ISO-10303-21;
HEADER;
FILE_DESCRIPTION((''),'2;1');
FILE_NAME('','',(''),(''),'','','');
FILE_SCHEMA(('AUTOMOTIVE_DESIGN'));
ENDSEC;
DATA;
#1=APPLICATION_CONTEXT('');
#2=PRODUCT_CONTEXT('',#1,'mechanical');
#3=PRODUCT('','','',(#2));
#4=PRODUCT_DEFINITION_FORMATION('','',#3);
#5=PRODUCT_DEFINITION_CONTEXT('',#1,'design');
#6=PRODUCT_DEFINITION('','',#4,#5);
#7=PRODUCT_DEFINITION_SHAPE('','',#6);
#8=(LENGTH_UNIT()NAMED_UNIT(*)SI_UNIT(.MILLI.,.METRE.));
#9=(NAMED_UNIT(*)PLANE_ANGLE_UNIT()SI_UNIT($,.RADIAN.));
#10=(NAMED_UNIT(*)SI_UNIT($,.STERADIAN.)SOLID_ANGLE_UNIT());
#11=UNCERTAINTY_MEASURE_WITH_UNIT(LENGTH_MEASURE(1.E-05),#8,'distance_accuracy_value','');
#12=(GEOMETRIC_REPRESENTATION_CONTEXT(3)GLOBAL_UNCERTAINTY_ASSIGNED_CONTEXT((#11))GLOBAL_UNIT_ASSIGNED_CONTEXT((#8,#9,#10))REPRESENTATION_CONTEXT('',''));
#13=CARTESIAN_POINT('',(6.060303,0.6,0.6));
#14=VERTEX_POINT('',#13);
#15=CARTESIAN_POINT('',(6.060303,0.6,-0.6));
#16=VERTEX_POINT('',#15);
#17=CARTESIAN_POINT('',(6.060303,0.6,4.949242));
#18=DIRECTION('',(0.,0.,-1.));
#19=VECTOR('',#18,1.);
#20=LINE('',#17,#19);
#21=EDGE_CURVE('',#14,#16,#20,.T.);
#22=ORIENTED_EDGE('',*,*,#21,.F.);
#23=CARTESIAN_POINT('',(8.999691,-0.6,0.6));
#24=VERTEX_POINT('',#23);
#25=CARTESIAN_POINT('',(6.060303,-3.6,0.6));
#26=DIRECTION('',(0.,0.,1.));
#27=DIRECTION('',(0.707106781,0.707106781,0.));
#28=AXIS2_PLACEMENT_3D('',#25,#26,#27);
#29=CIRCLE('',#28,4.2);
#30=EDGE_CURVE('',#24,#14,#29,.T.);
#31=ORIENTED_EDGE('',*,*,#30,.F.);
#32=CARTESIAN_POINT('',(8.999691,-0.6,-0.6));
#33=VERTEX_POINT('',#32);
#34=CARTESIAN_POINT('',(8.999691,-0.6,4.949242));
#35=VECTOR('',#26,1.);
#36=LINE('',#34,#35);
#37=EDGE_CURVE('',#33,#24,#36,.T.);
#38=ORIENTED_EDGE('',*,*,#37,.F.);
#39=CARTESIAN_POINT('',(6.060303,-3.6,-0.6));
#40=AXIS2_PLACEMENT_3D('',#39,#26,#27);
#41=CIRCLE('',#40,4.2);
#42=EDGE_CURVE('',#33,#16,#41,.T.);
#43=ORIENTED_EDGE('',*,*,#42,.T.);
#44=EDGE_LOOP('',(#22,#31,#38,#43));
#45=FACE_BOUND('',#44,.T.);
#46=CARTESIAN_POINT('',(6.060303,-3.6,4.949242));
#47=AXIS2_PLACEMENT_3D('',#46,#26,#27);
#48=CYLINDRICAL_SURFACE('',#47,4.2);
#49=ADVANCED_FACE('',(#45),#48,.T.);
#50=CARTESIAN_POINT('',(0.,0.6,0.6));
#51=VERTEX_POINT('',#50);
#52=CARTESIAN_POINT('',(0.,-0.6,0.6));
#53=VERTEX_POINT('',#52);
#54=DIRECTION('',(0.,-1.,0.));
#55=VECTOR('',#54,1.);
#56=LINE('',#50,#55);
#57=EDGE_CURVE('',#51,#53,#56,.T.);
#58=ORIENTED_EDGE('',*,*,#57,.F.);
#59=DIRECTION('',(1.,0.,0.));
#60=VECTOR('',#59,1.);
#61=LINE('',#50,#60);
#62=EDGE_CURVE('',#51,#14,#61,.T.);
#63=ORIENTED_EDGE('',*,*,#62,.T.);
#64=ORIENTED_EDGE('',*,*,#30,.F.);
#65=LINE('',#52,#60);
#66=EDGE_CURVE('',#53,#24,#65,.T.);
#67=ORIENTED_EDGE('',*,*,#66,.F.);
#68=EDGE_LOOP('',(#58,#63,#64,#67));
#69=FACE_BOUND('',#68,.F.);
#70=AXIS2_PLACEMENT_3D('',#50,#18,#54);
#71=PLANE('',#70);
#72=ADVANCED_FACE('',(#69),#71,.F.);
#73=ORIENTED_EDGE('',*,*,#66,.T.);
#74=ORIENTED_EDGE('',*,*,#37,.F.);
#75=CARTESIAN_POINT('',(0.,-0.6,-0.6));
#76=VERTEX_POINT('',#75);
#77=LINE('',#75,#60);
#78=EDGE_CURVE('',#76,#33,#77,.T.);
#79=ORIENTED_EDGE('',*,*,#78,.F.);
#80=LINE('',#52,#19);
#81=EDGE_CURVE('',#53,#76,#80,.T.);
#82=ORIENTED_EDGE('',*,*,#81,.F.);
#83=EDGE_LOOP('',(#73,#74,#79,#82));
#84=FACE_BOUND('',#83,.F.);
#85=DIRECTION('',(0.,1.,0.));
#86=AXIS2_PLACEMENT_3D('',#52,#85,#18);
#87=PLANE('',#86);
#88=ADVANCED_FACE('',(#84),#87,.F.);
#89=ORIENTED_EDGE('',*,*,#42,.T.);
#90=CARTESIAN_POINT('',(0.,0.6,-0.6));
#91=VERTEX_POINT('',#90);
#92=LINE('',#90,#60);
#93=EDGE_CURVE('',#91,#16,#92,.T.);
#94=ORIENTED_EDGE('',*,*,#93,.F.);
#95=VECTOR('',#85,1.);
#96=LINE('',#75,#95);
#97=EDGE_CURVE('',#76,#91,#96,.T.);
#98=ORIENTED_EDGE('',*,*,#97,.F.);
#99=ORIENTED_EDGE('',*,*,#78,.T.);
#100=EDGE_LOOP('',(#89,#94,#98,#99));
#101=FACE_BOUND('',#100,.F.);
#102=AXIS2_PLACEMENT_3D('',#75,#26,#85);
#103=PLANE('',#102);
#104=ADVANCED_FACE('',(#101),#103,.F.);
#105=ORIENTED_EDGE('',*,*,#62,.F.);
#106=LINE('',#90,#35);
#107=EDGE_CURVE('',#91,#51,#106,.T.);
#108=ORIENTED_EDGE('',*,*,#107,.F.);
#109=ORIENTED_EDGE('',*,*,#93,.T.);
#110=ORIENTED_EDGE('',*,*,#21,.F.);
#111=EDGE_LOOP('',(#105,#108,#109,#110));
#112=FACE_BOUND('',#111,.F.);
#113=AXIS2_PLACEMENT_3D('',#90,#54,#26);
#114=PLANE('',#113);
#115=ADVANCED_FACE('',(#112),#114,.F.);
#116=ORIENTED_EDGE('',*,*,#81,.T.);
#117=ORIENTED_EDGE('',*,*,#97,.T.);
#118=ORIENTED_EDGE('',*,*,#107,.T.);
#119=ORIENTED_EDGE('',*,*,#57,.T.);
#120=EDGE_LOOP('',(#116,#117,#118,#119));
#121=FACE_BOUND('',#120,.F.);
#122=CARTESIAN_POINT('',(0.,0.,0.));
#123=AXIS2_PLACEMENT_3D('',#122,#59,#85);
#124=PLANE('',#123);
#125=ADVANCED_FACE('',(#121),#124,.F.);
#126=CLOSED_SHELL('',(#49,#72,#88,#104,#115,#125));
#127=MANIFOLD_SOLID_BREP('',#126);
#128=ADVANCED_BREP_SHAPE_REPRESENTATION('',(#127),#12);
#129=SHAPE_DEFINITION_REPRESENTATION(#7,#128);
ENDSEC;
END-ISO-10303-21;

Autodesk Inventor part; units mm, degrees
ref_plane "YZ Plane" through (0, 0, 0) normal (1, 0, 0) x (0, 1, 0)
ref_plane "XZ Plane" through (0, 0, 0) normal (0, 1, 0) x (-1, 0, 0)
sketch "Sketch1" plane through (0, 0, 0) normal (1, 0, 0) x (0, 1, 0)
  line L0 (-0.6, 0.6) -> (-0.6, -0.6)
  line L1 (-0.6, -0.6) -> (0.6, -0.6)
  line L2 (0.6, -0.6) -> (0.6, 0.6)
  line L3 (0.6, 0.6) -> (-0.6, 0.6)
  line L4 (-0.6, 0.6) -> (0.6, -0.6) construction
  line L5 (-0.6, -0.6) -> (0.6, 0.6) construction
  point P0 (0, 0)
  dimension "d0" = 1.2
  dimension "d1" = 1.2
extrude "Extrusion1" add sketch "Sketch1" along normal blind 9
ref_plane "Work Plane1" through (0, -0.6, 0.6) normal (0, 0, 1) x (1, 0, 0)
sketch "Sketch2" plane through (0, -0.6, 0.6) normal (0, 0, 1) x (1, 0, 0)
  line L0 (9, 0) -> (9, 1.2) projected
  line L1 (0, 1.2) -> (9, 1.2) projected
  line L2 (9, 0) -> (9, 1.2)
  line L3 (9, 1.2) -> (7.8, 1.2)
  line L4 (7.8, 1.2) -> (9, 0)
  point P0 (0, 0.6)
  dimension "d5" = 1.2
extrude "Extrusion2" cut sketch "Sketch2" against normal blind 9
fillet "Fillet1" radius 4.2 1 edges at (7.8, 0.6, 0)
properties part number "New_ThinFinger"
